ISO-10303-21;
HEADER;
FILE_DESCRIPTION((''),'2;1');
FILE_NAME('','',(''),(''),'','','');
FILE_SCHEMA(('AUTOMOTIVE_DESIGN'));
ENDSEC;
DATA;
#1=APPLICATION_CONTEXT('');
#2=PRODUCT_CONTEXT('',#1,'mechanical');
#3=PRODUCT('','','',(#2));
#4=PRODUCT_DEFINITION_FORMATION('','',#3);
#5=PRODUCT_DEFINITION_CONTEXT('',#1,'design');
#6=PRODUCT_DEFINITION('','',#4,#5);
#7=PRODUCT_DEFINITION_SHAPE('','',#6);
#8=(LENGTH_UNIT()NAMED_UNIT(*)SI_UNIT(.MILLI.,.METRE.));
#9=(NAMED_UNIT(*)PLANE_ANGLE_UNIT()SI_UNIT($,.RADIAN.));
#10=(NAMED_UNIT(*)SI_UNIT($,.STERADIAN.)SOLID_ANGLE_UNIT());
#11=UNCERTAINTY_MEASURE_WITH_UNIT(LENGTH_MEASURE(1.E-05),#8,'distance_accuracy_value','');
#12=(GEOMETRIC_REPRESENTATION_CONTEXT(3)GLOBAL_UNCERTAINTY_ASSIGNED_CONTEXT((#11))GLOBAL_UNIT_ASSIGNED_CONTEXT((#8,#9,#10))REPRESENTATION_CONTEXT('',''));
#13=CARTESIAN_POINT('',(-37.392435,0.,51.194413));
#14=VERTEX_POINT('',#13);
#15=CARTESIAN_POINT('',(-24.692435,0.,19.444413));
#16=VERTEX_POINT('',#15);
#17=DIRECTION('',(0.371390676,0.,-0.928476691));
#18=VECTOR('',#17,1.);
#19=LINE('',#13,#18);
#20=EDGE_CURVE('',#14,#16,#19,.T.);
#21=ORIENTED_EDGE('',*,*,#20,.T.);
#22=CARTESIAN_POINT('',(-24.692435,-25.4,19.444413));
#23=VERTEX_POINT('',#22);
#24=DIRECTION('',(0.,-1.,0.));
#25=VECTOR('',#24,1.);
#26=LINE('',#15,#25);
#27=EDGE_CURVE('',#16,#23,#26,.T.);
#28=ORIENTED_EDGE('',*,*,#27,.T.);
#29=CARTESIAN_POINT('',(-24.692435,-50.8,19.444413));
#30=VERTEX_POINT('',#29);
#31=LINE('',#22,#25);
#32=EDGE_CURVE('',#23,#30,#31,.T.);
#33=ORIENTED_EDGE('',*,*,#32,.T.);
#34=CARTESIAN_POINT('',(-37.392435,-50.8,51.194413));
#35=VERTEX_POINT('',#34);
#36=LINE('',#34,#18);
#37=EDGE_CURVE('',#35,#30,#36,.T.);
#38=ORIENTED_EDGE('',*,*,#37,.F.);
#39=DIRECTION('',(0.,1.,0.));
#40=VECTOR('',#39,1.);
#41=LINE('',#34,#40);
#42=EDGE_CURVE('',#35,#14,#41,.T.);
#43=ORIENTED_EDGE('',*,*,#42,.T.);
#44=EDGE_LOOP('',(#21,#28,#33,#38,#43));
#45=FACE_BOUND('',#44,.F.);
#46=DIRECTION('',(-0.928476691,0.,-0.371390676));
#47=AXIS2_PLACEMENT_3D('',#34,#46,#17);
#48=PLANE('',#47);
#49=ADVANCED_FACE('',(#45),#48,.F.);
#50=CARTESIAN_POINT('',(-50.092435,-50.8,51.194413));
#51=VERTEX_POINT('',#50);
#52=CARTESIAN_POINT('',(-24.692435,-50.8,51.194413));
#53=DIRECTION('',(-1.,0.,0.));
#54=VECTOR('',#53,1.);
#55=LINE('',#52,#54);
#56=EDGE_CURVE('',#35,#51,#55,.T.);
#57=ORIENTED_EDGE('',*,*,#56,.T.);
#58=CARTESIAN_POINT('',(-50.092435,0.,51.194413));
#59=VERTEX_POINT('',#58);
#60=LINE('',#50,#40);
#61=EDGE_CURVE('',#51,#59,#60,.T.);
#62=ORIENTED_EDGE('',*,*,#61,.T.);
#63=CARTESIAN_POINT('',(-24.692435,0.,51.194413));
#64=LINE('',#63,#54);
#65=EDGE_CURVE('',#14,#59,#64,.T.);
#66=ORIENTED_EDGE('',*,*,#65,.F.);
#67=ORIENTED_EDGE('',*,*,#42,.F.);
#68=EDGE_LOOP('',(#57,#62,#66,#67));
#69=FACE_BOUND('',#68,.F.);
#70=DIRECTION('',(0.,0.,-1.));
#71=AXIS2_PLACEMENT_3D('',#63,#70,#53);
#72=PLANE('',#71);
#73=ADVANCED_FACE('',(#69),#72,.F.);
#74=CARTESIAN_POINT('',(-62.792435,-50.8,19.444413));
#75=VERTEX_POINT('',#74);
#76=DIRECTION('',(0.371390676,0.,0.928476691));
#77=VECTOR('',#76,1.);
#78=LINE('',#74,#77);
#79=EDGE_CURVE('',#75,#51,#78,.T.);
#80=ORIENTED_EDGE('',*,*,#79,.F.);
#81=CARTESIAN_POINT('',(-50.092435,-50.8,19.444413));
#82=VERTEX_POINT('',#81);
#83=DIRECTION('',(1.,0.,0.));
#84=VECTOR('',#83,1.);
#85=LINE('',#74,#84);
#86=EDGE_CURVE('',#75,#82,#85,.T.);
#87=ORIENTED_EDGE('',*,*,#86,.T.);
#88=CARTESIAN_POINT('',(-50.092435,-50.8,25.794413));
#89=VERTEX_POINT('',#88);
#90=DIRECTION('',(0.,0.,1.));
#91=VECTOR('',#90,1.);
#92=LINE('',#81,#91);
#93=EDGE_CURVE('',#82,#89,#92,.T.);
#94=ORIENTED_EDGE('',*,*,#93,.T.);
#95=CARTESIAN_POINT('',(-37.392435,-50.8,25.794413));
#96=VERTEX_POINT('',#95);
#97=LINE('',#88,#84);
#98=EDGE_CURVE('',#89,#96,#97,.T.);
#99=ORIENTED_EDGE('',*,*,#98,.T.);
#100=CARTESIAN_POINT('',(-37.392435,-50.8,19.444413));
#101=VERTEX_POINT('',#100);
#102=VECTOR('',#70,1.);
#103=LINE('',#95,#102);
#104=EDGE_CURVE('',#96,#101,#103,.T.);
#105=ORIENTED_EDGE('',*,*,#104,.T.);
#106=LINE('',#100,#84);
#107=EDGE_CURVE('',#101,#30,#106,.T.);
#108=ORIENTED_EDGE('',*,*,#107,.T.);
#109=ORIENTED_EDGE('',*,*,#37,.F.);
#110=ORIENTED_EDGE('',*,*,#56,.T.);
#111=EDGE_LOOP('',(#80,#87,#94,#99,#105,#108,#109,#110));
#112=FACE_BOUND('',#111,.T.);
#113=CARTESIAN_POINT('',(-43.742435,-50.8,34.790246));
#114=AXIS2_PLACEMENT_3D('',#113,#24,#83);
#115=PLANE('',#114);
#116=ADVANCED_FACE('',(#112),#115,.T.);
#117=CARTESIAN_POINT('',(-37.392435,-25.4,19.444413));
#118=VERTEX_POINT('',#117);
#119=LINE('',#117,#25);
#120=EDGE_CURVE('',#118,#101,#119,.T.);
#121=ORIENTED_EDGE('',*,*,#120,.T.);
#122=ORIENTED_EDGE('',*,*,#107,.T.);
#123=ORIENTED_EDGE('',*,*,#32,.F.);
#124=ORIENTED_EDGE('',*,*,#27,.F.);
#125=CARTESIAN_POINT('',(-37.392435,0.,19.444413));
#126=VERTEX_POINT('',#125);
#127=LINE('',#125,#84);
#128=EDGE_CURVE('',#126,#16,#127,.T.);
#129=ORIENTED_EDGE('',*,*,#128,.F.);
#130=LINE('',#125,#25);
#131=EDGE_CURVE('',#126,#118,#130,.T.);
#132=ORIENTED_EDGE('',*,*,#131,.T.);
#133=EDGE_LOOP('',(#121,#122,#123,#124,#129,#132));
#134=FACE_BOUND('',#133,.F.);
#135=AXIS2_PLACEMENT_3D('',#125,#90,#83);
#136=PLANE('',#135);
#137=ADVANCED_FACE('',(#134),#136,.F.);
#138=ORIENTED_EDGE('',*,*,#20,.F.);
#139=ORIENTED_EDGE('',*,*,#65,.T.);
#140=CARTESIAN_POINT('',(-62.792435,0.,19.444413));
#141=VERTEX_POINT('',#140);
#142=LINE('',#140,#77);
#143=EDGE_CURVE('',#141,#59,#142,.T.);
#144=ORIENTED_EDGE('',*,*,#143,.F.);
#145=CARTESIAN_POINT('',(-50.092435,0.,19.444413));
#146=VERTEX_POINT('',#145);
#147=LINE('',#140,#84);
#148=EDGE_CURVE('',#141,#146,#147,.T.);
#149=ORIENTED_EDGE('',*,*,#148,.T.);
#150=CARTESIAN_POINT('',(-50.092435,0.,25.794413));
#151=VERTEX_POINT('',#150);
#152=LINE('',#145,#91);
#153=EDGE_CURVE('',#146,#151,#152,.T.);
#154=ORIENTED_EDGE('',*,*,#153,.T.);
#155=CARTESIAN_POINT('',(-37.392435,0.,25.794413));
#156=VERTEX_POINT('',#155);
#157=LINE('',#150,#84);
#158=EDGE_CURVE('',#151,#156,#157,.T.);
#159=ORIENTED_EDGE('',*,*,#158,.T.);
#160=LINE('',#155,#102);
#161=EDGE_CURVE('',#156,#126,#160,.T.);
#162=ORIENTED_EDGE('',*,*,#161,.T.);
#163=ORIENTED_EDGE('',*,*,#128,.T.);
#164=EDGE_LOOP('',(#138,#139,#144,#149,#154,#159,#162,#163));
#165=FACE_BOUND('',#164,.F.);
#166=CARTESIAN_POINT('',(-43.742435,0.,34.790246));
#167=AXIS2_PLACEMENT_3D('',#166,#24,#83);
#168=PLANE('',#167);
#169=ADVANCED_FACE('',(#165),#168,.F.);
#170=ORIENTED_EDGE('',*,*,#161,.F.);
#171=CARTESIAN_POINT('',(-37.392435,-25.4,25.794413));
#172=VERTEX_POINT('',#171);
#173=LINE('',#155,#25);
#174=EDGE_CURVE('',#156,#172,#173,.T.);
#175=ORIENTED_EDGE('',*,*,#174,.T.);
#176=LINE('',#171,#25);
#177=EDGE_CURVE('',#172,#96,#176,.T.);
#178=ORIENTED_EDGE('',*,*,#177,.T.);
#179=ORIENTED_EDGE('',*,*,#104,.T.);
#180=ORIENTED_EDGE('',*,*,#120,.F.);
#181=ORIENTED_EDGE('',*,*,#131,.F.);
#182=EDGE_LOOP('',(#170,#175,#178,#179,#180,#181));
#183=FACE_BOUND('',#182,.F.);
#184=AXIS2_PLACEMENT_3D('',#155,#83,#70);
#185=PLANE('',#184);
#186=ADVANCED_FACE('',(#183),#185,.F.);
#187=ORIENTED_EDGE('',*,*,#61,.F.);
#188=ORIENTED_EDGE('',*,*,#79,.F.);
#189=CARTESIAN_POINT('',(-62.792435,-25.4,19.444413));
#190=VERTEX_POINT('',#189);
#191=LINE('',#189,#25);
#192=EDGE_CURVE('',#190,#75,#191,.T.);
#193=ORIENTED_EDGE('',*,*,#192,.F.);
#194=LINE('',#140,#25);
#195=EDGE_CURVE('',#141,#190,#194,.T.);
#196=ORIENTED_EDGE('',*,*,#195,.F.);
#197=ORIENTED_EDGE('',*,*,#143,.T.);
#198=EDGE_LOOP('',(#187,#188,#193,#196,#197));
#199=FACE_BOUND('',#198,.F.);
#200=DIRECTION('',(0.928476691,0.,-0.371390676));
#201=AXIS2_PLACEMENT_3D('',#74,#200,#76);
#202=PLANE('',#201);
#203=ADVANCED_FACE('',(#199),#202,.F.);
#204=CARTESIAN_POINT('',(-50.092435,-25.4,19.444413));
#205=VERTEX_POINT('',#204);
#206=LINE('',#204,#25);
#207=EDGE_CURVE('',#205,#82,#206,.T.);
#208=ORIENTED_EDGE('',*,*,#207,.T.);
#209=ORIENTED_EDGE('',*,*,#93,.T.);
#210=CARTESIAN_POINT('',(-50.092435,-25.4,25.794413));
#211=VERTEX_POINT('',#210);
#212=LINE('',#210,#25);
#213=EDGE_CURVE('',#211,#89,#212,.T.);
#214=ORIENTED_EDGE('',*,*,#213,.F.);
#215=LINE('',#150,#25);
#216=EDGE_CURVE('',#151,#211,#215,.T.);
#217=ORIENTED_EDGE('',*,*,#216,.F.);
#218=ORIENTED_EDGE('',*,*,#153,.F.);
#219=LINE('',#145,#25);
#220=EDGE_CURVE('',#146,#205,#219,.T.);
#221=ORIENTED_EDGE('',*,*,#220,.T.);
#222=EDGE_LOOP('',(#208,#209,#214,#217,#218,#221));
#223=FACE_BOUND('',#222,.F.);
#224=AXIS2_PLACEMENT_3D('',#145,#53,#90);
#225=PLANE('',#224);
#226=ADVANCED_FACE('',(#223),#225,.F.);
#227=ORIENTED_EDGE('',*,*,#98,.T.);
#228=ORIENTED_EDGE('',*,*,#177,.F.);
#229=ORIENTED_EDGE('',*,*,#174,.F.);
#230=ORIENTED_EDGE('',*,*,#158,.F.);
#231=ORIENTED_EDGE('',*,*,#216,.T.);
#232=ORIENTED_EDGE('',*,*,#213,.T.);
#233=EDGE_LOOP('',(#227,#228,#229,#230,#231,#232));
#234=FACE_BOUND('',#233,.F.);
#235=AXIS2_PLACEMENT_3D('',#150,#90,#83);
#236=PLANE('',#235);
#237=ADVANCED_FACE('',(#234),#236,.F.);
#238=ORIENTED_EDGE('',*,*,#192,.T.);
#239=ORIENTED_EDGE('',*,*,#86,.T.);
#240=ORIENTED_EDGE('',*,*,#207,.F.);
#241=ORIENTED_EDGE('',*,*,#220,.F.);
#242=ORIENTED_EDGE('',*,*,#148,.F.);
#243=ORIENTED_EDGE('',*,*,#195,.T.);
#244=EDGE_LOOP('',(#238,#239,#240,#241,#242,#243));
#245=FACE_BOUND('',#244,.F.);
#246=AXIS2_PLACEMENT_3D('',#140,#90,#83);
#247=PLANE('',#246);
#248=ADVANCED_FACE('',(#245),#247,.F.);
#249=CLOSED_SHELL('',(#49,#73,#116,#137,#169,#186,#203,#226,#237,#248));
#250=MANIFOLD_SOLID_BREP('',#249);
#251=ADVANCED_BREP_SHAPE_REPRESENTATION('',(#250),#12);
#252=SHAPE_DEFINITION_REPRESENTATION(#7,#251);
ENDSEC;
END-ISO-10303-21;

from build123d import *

# Parameters (mm, degrees)
F1_DEPTH = 25.4
F2_DEPTH = 25.4
F4_DEPTH = 50.8
F6_DEPTH = 50.8


# Not quite as in the source:
# - a feature names something its author has since deleted; it is built from what else it names


with BuildPart() as f1:
    # F0 (on Front) → F1 (new body)
    with BuildSketch(Plane.XZ):
        Polygon((-24.6924351323, 51.1944131529), (-62.7924351323, 51.1944131529), (-62.7924351323, 19.4444131529), (-50.0924351323, 19.4444131529), (-50.0924351323, 25.7944131529), (-37.3924351323, 25.7944131529), (-37.3924351323, 19.4444131529), (-24.6924351323, 19.4444131529), align=None)
    extrude(amount=F1_DEPTH)

    # F0 (on Front) + F1_face (on face) → F2 (join)
    with BuildSketch(Plane.XZ):
        Polygon((-24.6924351323, 51.1944131529), (-62.7924351323, 51.1944131529), (-62.7924351323, 19.4444131529), (-50.0924351323, 19.4444131529), (-50.0924351323, 25.7944131529), (-37.3924351323, 25.7944131529), (-37.3924351323, 19.4444131529), (-24.6924351323, 19.4444131529), align=None)
    with BuildSketch(Plane(origin=(-43.7424351323, -25.4, 36.2265560101), x_dir=(1, 0, 0), z_dir=(0, -1, 0))):
        Polygon((19.05, 14.9678571429), (-19.05, 14.9678571429), (-19.05, -16.7821428571), (-6.35, -16.7821428571), (-6.35, -10.4321428571), (6.35, -10.4321428571), (6.35, -16.7821428571), (19.05, -16.7821428571), align=None)
    extrude(amount=F2_DEPTH)

    # F3 (on face) → F4 (cut)
    with BuildSketch(Plane.XZ.offset(50.8)):
        Polygon((-62.7924351323, 19.4444131529), (-50.0924351323, 51.1944131529), (-62.7924351323, 51.1944131529), align=None)
    extrude(amount=-F4_DEPTH, mode=Mode.SUBTRACT)

    # F5 (on face) → F6 (cut)
    with BuildSketch(Plane.XZ.offset(50.8)):
        Polygon((-24.6924351323, 51.1944131529), (-37.3924351323, 51.1944131529), (-24.6924351323, 19.4444131529), align=None)
    extrude(amount=-F6_DEPTH, mode=Mode.SUBTRACT)


solid = f1.part
